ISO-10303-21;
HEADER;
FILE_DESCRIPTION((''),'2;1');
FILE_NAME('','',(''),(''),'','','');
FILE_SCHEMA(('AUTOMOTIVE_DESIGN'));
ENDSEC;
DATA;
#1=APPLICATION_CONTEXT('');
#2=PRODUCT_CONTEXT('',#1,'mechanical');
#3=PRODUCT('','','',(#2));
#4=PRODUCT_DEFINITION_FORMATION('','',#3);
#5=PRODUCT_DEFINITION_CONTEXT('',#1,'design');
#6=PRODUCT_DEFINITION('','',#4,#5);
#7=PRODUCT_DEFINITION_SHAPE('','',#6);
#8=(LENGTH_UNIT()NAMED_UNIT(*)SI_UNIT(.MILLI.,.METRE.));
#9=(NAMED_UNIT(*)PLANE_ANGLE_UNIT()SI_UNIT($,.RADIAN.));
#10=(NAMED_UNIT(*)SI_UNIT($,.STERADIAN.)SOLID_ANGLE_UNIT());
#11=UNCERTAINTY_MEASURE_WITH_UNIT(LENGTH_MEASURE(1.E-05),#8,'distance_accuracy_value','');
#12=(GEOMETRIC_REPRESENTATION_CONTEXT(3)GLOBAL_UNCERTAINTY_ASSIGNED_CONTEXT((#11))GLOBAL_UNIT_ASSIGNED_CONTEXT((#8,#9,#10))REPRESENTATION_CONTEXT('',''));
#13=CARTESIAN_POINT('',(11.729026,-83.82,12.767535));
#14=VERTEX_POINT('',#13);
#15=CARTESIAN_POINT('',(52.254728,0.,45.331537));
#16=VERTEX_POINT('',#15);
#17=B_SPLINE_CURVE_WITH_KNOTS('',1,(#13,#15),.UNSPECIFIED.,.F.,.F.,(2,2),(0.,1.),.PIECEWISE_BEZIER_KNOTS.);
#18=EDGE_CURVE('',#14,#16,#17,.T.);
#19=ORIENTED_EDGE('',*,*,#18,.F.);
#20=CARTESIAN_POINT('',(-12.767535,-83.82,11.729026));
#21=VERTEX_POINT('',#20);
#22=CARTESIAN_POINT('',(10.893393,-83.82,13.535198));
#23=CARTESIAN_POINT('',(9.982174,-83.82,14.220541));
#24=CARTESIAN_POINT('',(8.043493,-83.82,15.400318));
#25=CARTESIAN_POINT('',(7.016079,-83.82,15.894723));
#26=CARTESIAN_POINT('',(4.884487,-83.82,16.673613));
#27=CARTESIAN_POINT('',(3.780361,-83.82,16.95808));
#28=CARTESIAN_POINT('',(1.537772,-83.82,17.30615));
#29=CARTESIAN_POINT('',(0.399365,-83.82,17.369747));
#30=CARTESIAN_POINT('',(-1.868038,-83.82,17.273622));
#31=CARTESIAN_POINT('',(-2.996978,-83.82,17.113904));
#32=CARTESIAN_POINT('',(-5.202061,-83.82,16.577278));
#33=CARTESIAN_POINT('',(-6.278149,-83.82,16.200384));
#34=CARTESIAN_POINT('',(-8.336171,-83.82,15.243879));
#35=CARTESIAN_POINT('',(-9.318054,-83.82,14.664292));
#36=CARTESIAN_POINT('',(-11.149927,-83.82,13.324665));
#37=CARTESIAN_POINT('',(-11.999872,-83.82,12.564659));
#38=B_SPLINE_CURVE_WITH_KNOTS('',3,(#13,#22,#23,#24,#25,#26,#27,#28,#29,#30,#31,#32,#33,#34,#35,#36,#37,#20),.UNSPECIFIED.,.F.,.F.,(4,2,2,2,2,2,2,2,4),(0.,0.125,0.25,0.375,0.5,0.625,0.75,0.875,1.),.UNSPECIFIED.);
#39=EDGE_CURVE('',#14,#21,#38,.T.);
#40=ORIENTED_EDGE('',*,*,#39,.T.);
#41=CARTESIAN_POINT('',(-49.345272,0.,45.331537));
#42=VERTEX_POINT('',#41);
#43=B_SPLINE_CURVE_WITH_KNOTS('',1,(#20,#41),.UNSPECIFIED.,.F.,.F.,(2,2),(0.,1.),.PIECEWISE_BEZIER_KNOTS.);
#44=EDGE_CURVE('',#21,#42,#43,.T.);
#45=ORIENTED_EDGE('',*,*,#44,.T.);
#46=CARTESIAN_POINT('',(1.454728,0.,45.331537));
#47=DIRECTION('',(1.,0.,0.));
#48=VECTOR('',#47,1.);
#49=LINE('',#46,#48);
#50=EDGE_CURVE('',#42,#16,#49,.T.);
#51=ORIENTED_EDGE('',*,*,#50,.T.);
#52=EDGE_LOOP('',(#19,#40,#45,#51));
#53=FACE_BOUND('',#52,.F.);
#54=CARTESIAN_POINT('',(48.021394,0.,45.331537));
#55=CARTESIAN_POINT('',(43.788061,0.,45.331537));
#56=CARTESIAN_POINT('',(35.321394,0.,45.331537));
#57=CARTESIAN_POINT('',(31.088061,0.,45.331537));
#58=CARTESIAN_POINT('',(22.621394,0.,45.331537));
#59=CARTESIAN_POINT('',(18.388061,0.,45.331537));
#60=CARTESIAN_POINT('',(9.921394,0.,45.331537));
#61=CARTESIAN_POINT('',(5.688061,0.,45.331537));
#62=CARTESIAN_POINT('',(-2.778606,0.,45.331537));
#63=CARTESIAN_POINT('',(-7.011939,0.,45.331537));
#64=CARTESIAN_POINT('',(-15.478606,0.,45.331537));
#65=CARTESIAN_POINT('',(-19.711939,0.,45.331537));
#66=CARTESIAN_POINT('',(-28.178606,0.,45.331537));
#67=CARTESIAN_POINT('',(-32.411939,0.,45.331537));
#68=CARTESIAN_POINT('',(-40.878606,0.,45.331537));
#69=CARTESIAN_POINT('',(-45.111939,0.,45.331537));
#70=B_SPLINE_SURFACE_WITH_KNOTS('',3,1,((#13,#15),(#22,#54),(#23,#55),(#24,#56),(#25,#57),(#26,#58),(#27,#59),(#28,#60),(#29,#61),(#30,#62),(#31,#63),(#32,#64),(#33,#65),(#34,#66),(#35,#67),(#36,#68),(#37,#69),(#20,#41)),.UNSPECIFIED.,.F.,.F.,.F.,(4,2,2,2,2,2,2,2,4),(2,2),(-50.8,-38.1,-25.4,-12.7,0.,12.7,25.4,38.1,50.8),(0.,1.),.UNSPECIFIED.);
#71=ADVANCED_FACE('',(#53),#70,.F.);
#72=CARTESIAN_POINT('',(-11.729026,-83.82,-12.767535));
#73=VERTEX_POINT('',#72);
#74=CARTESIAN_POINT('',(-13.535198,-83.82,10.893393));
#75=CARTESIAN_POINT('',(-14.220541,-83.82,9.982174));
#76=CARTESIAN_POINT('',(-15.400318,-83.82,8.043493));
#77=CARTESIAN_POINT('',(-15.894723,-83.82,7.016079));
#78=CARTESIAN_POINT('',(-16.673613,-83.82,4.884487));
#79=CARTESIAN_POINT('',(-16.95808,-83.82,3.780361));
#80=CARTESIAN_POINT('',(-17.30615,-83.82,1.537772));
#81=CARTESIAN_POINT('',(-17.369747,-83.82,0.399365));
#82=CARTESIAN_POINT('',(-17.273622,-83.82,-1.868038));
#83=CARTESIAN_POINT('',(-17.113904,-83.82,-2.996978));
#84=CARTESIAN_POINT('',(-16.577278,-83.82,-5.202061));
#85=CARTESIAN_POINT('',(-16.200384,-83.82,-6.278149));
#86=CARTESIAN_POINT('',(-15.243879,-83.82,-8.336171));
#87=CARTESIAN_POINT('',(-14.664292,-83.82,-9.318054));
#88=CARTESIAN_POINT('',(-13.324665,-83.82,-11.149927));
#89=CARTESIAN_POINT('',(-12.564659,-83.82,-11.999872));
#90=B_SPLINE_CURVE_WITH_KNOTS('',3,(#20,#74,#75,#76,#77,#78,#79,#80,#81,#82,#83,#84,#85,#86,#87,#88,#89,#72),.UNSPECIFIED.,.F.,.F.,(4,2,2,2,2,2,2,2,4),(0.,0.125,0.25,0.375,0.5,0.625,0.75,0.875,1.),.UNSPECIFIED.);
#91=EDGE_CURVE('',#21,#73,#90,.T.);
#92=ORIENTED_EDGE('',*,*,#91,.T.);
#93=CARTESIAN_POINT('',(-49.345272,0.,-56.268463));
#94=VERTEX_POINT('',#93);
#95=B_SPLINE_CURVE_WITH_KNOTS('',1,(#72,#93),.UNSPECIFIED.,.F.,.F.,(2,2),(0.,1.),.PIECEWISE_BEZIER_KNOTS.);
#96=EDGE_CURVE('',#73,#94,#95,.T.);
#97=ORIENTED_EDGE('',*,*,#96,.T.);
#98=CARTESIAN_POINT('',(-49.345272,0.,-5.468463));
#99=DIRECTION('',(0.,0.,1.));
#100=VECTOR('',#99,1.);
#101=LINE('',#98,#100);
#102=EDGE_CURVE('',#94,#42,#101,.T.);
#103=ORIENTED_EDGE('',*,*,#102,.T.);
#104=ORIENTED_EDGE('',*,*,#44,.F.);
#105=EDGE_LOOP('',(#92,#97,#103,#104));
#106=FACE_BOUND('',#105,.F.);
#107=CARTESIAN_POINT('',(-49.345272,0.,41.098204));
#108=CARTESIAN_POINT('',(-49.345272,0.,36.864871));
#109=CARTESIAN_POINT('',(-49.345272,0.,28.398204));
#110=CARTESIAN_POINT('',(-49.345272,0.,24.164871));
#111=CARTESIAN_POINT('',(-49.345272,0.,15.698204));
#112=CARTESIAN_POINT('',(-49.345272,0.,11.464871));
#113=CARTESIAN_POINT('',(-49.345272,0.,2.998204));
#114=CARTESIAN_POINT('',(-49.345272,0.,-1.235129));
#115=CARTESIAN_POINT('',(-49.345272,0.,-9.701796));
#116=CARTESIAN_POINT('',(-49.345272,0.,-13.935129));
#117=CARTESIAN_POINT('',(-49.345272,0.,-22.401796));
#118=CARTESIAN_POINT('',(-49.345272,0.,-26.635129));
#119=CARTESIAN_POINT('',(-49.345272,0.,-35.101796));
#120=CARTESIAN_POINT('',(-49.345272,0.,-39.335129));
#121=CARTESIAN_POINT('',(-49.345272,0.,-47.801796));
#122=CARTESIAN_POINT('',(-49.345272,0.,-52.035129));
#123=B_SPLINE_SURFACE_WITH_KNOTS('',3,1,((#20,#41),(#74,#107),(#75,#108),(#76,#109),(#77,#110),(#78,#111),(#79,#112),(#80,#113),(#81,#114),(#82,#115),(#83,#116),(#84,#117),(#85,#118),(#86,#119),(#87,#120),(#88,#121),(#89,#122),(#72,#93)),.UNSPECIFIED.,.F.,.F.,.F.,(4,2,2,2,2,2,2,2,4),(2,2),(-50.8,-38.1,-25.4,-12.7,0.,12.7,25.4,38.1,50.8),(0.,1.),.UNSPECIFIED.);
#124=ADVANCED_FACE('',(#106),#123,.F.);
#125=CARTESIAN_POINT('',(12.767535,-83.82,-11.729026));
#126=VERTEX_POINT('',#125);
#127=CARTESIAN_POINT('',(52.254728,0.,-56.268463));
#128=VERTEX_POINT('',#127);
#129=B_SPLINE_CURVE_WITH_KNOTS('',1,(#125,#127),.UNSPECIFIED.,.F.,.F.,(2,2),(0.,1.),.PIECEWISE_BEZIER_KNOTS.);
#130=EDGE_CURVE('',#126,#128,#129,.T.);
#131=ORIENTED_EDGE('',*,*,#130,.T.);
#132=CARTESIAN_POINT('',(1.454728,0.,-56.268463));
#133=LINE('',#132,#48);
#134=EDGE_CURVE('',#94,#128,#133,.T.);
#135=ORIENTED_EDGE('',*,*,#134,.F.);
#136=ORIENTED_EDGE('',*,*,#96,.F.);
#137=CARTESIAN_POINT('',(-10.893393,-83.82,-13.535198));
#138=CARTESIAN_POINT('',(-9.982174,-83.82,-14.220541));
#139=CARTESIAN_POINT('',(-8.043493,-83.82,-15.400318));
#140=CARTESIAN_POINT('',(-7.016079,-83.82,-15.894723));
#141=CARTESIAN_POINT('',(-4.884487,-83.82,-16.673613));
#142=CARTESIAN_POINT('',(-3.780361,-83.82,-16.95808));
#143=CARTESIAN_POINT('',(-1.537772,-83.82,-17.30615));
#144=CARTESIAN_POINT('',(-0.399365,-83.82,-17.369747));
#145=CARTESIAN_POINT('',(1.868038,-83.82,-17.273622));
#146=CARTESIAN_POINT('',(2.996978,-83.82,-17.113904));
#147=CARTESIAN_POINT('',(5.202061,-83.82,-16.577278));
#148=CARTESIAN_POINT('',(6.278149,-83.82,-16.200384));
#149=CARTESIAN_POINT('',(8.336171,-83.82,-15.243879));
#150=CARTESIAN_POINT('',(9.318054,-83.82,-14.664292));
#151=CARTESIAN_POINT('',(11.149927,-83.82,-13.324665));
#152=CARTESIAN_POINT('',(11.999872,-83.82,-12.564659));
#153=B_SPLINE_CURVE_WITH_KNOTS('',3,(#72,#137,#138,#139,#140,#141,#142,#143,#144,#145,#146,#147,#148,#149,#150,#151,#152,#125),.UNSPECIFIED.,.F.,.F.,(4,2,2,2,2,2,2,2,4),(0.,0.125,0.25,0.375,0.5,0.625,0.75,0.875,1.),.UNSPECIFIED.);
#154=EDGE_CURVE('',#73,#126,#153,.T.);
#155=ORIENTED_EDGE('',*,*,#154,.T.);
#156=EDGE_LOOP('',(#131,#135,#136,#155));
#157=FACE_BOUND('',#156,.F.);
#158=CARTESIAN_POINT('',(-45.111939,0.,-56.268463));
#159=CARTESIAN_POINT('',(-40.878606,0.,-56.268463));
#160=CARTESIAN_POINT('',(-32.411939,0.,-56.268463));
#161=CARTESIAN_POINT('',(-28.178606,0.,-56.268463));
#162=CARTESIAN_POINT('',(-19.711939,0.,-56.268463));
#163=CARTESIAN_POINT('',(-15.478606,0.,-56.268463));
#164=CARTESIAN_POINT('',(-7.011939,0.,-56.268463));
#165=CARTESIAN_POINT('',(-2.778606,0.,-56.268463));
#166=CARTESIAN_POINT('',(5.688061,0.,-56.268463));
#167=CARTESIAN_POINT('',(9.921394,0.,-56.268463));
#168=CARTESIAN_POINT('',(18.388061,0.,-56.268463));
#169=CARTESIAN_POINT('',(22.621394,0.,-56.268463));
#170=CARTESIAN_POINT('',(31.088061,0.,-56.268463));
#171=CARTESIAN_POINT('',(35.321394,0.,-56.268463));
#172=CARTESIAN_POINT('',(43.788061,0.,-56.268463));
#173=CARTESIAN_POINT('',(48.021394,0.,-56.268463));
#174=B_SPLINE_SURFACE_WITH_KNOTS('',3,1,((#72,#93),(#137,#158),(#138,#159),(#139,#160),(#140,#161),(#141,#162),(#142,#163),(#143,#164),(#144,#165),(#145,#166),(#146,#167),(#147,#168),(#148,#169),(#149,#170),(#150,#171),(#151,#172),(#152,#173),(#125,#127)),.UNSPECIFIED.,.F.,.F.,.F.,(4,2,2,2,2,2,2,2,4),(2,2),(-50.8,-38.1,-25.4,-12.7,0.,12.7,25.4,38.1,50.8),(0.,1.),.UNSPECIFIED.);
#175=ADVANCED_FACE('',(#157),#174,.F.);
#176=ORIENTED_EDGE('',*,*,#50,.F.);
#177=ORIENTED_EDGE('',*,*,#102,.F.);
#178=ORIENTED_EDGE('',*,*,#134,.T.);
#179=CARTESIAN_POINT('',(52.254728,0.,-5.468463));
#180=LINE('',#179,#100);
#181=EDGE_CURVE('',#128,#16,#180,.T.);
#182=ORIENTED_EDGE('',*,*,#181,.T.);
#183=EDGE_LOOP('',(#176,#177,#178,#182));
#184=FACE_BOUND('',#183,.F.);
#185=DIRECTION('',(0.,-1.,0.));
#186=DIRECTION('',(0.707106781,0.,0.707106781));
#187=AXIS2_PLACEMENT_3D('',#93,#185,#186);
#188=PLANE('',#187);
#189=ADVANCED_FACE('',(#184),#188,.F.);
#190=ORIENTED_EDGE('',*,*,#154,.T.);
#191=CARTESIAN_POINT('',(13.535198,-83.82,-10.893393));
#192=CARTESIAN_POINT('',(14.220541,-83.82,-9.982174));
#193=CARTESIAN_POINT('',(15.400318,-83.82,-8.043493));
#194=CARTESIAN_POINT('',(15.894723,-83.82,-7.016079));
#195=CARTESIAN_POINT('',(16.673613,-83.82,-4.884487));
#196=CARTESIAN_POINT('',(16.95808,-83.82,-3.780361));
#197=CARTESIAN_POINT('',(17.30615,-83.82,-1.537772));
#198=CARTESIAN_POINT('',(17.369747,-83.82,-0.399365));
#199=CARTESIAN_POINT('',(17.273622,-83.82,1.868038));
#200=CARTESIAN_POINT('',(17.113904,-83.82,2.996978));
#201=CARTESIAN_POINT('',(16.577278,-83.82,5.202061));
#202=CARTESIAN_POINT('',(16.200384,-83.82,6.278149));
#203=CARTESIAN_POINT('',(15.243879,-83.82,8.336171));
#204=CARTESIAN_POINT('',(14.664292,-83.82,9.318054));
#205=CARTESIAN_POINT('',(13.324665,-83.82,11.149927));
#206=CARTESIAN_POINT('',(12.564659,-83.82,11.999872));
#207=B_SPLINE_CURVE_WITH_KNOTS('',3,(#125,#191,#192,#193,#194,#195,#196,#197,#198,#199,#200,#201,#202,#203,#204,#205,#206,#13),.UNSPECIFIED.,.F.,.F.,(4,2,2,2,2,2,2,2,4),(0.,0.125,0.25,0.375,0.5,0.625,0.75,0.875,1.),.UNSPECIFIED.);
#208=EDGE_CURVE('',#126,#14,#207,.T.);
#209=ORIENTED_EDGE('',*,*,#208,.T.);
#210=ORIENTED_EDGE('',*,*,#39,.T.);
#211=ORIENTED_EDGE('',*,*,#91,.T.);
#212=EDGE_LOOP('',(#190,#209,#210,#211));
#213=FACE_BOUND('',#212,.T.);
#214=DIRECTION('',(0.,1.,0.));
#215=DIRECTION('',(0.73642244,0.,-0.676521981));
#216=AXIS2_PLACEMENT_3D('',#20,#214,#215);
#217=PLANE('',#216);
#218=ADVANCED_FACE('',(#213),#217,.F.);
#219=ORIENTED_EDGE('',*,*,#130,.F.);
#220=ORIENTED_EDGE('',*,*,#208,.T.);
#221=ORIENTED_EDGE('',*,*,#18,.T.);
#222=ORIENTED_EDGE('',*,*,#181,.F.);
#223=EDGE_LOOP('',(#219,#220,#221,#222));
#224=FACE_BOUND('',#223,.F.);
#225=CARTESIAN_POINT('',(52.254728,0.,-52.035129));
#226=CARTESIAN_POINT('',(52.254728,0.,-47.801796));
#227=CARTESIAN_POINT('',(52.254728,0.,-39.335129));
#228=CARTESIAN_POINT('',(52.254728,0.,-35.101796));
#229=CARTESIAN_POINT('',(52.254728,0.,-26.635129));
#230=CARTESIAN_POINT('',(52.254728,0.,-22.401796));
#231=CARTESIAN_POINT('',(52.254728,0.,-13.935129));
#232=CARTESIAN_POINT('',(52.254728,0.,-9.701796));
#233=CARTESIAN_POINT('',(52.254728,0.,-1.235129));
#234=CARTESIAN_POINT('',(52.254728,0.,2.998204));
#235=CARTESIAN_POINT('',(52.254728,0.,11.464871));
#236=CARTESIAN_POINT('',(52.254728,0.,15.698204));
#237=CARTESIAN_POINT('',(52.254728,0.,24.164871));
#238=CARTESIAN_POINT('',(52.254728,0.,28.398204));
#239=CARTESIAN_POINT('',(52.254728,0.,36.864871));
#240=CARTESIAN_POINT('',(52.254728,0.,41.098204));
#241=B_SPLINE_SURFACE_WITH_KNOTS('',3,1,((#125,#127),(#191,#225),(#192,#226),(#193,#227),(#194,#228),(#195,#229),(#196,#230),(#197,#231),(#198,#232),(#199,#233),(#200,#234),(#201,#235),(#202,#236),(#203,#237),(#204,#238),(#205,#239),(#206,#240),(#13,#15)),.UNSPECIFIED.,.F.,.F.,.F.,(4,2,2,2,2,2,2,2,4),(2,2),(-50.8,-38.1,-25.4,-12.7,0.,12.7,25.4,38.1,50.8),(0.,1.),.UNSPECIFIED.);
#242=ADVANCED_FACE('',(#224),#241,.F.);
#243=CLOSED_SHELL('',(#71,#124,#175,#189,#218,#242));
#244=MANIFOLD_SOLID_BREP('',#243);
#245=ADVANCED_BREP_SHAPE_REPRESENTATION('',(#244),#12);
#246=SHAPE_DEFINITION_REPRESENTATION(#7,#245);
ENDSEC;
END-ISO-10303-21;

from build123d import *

# Parameters (mm, degrees)
F0_W = 101.6
F0_H = 101.6


# Not quite as in the source:
# - the arcs of a loft's sections are written as splines that run evenly, so that the points pair up as in the source's solid


with BuildPart() as f3:
    # F2 (on offset) → F3 section 0
    with BuildSketch(Plane.XZ.offset(83.82)):
        with BuildLine():
            add(Edge.make_bspline(
                [(-12.7675348715, 11.7290260492), (-13.5351978313, 10.893392846), (-14.2205411574, 9.9821739727), (-15.4003183185, 8.0434932535), (-15.8947229813, 7.0160793452), (-16.6736132092, 4.8844867261), (-16.9580795149, 3.7803607232), (-17.3061504951, 1.5377721132), (-17.3697465629, 0.3993649586), (-17.2736221227, -1.8680382197), (-17.1139039916, -2.9969781774), (-16.5772781394, -5.2020608915), (-16.2003836875, -6.2781491228), (-15.2438786538, -8.3361712805), (-14.6642917235, -9.3180543182), (-13.3246654604, -11.1499272821), (-12.5646592525, -11.9998719117), (-11.7290260492, -12.7675348715)],
                knots=[0, 0, 0, 0, 0.125, 0.125, 0.25, 0.25, 0.375, 0.375, 0.5, 0.5, 0.625, 0.625, 0.75, 0.75, 0.875, 0.875, 1, 1, 1, 1], degree=3))
            add(Edge.make_bspline(
                [(-11.7290260492, -12.7675348715), (-10.893392846, -13.5351978313), (-9.9821739727, -14.2205411574), (-8.0434932535, -15.4003183185), (-7.0160793452, -15.8947229813), (-4.8844867261, -16.6736132092), (-3.7803607232, -16.9580795149), (-1.5377721132, -17.3061504951), (-0.3993649586, -17.3697465629), (1.8680382197, -17.2736221227), (2.9969781774, -17.1139039916), (5.2020608915, -16.5772781394), (6.2781491228, -16.2003836875), (8.3361712805, -15.2438786538), (9.3180543182, -14.6642917235), (11.1499272821, -13.3246654604), (11.9998719117, -12.5646592525), (12.7675348715, -11.7290260492)],
                knots=[0, 0, 0, 0, 0.125, 0.125, 0.25, 0.25, 0.375, 0.375, 0.5, 0.5, 0.625, 0.625, 0.75, 0.75, 0.875, 0.875, 1, 1, 1, 1], degree=3))
            add(Edge.make_bspline(
                [(12.7675348715, -11.7290260492), (13.5351978313, -10.893392846), (14.2205411574, -9.9821739727), (15.4003183185, -8.0434932535), (15.8947229813, -7.0160793452), (16.6736132092, -4.8844867261), (16.9580795149, -3.7803607232), (17.3061504951, -1.5377721132), (17.3697465629, -0.3993649586), (17.2736221227, 1.8680382197), (17.1139039916, 2.9969781774), (16.5772781394, 5.2020608915), (16.2003836875, 6.2781491228), (15.2438786538, 8.3361712805), (14.6642917235, 9.3180543182), (13.3246654604, 11.1499272821), (12.5646592525, 11.9998719117), (11.7290260492, 12.7675348715)],
                knots=[0, 0, 0, 0, 0.125, 0.125, 0.25, 0.25, 0.375, 0.375, 0.5, 0.5, 0.625, 0.625, 0.75, 0.75, 0.875, 0.875, 1, 1, 1, 1], degree=3))
            add(Edge.make_bspline(
                [(11.7290260492, 12.7675348715), (10.893392846, 13.5351978313), (9.9821739727, 14.2205411574), (8.0434932535, 15.4003183185), (7.0160793452, 15.8947229813), (4.8844867261, 16.6736132092), (3.7803607232, 16.9580795149), (1.5377721132, 17.3061504951), (0.3993649586, 17.3697465629), (-1.8680382197, 17.2736221227), (-2.9969781774, 17.1139039916), (-5.2020608915, 16.5772781394), (-6.2781491228, 16.2003836875), (-8.3361712805, 15.2438786538), (-9.3180543182, 14.6642917235), (-11.1499272821, 13.3246654604), (-11.9998719117, 12.5646592525), (-12.7675348715, 11.7290260492)],
                knots=[0, 0, 0, 0, 0.125, 0.125, 0.25, 0.25, 0.375, 0.375, 0.5, 0.5, 0.625, 0.625, 0.75, 0.75, 0.875, 0.875, 1, 1, 1, 1], degree=3))
        make_face()
    # F0 (on Front) → F3 section 1
    with BuildSketch(Plane.XZ):
        with Locations((1.4547277242, -5.4684626475)):
            Rectangle(F0_W, F0_H)
    loft(ruled=True)


solid = f3.part
